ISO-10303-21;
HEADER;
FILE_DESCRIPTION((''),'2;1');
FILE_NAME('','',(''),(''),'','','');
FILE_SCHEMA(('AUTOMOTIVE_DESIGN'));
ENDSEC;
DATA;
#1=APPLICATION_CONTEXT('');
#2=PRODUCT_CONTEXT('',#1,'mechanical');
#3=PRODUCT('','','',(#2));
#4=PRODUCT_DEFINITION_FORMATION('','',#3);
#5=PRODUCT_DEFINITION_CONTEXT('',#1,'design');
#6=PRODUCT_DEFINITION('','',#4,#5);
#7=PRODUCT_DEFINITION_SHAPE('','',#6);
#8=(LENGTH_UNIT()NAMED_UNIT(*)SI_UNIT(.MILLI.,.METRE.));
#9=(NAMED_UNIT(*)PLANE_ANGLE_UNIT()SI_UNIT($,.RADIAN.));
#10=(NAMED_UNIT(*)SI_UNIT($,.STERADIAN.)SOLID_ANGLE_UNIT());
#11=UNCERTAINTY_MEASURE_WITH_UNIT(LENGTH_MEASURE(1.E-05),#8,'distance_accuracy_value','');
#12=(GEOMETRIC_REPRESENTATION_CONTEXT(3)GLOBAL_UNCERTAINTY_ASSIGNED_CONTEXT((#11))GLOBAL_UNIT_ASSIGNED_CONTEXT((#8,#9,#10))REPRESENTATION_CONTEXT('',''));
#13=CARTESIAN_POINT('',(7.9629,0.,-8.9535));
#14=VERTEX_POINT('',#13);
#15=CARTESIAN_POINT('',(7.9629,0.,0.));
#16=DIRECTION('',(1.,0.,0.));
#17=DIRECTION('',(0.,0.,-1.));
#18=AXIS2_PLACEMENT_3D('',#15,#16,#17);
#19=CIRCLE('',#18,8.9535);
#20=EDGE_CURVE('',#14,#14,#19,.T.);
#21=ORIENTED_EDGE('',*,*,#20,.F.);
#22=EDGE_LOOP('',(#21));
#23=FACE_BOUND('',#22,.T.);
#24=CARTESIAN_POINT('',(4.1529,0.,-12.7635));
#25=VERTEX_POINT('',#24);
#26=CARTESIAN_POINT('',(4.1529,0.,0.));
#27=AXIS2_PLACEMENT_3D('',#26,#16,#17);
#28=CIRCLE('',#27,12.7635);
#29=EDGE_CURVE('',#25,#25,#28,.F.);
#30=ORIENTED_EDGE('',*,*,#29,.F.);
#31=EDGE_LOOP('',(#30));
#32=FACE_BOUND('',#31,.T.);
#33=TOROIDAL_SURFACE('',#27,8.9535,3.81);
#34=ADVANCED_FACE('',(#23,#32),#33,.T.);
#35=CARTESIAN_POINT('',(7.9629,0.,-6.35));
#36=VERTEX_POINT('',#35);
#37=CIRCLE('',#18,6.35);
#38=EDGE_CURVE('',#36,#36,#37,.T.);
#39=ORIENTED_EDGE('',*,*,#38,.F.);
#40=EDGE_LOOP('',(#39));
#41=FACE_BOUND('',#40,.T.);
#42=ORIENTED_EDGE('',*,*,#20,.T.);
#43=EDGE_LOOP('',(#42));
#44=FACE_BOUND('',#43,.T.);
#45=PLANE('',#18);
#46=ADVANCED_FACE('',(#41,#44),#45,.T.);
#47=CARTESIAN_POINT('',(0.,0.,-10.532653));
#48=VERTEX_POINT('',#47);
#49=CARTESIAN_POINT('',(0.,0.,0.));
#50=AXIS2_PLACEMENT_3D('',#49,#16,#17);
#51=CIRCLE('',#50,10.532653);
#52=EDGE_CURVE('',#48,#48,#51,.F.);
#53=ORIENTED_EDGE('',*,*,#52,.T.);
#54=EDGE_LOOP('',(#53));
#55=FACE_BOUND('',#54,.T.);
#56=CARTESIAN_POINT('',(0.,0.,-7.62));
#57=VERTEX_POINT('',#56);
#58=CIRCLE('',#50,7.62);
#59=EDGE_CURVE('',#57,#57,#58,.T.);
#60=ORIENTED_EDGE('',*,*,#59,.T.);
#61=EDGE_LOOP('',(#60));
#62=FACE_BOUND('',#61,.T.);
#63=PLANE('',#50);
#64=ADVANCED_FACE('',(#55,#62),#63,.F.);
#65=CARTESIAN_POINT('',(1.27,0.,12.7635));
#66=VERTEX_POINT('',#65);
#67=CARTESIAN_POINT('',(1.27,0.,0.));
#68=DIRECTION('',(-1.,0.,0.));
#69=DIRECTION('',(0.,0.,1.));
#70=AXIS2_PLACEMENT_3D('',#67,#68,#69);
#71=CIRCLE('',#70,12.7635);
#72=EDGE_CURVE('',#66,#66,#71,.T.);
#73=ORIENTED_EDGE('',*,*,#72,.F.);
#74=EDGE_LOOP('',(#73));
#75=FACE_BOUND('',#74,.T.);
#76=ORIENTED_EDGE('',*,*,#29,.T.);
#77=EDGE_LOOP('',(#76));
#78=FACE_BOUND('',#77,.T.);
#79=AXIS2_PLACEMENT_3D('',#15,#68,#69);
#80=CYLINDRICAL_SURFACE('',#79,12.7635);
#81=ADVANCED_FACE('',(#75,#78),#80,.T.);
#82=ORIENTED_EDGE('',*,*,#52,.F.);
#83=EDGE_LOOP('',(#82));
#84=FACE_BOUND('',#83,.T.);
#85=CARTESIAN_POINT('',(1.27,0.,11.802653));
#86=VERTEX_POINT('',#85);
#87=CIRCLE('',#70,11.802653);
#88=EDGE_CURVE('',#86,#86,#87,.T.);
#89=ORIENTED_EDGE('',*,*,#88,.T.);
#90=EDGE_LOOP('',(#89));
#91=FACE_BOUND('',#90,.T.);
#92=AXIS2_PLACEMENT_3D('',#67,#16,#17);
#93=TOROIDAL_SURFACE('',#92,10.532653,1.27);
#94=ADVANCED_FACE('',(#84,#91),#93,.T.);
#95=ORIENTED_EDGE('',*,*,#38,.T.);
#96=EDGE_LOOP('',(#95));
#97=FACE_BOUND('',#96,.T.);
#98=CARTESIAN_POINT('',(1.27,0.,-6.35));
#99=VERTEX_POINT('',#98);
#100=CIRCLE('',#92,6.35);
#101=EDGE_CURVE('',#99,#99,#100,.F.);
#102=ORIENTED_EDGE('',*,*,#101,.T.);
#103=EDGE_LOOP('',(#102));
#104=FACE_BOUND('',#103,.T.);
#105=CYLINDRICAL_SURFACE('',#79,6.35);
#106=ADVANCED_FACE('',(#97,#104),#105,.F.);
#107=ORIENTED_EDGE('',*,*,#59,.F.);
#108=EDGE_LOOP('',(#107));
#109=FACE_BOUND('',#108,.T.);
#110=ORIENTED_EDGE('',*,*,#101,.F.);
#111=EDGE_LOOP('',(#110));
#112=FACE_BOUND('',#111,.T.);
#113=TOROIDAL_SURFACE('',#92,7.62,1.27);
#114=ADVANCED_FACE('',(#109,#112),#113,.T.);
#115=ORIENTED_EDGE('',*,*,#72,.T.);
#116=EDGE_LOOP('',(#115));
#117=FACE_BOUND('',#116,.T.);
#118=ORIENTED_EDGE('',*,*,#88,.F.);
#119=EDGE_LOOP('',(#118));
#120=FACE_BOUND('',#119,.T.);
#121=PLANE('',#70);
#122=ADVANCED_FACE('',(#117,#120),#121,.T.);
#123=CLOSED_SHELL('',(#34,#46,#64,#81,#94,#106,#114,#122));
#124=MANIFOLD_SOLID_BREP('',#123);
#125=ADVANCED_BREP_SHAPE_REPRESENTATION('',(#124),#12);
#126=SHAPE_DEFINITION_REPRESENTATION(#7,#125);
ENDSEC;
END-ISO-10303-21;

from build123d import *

# Parameters (mm, degrees)
SKETCH1_R           = 12.7635
SKETCH1_R_2         = 6.35
BOSS_EXTRUDE1_DEPTH = 7.9629
FILLET1_R           = 3.81
SKETCH2_R           = 12.7635
SKETCH2_R_2         = 11.802652822
CUT_EXTRUDE1_DEPTH  = 1.27
FILLET2_R           = 1.27


with BuildPart() as part:
    # Sketch1 → Boss-Extrude1 (new body)
    with BuildSketch(Plane(origin=(0, 0, 0), x_dir=(0, 0, -1), z_dir=(1, 0, 0))):
        Circle(SKETCH1_R)
        Circle(SKETCH1_R_2, mode=Mode.SUBTRACT)
    extrude(amount=BOSS_EXTRUDE1_DEPTH)

    # Fillet1
    fillet1_edges = [part.edges().sort_by_distance(p)[0] for p in [
        (7.9629, 0, 12.7635),
    ]]
    fillet(fillet1_edges, radius=FILLET1_R)

    # Sketch2 → Cut-Extrude1 (cut)
    with BuildSketch(Plane.ZY):
        Circle(SKETCH2_R)
        Circle(SKETCH2_R_2, mode=Mode.SUBTRACT)
    extrude(amount=-CUT_EXTRUDE1_DEPTH, mode=Mode.SUBTRACT)

    # Fillet2
    fillet2_edges = [part.edges().sort_by_distance(p)[0] for p in [
        (0, 0, -11.802652822),
        (0, 0, 6.35),
    ]]
    fillet(fillet2_edges, radius=FILLET2_R - 0.0001)  # a hair under: the kernel refuses the full size


solid = part.part
